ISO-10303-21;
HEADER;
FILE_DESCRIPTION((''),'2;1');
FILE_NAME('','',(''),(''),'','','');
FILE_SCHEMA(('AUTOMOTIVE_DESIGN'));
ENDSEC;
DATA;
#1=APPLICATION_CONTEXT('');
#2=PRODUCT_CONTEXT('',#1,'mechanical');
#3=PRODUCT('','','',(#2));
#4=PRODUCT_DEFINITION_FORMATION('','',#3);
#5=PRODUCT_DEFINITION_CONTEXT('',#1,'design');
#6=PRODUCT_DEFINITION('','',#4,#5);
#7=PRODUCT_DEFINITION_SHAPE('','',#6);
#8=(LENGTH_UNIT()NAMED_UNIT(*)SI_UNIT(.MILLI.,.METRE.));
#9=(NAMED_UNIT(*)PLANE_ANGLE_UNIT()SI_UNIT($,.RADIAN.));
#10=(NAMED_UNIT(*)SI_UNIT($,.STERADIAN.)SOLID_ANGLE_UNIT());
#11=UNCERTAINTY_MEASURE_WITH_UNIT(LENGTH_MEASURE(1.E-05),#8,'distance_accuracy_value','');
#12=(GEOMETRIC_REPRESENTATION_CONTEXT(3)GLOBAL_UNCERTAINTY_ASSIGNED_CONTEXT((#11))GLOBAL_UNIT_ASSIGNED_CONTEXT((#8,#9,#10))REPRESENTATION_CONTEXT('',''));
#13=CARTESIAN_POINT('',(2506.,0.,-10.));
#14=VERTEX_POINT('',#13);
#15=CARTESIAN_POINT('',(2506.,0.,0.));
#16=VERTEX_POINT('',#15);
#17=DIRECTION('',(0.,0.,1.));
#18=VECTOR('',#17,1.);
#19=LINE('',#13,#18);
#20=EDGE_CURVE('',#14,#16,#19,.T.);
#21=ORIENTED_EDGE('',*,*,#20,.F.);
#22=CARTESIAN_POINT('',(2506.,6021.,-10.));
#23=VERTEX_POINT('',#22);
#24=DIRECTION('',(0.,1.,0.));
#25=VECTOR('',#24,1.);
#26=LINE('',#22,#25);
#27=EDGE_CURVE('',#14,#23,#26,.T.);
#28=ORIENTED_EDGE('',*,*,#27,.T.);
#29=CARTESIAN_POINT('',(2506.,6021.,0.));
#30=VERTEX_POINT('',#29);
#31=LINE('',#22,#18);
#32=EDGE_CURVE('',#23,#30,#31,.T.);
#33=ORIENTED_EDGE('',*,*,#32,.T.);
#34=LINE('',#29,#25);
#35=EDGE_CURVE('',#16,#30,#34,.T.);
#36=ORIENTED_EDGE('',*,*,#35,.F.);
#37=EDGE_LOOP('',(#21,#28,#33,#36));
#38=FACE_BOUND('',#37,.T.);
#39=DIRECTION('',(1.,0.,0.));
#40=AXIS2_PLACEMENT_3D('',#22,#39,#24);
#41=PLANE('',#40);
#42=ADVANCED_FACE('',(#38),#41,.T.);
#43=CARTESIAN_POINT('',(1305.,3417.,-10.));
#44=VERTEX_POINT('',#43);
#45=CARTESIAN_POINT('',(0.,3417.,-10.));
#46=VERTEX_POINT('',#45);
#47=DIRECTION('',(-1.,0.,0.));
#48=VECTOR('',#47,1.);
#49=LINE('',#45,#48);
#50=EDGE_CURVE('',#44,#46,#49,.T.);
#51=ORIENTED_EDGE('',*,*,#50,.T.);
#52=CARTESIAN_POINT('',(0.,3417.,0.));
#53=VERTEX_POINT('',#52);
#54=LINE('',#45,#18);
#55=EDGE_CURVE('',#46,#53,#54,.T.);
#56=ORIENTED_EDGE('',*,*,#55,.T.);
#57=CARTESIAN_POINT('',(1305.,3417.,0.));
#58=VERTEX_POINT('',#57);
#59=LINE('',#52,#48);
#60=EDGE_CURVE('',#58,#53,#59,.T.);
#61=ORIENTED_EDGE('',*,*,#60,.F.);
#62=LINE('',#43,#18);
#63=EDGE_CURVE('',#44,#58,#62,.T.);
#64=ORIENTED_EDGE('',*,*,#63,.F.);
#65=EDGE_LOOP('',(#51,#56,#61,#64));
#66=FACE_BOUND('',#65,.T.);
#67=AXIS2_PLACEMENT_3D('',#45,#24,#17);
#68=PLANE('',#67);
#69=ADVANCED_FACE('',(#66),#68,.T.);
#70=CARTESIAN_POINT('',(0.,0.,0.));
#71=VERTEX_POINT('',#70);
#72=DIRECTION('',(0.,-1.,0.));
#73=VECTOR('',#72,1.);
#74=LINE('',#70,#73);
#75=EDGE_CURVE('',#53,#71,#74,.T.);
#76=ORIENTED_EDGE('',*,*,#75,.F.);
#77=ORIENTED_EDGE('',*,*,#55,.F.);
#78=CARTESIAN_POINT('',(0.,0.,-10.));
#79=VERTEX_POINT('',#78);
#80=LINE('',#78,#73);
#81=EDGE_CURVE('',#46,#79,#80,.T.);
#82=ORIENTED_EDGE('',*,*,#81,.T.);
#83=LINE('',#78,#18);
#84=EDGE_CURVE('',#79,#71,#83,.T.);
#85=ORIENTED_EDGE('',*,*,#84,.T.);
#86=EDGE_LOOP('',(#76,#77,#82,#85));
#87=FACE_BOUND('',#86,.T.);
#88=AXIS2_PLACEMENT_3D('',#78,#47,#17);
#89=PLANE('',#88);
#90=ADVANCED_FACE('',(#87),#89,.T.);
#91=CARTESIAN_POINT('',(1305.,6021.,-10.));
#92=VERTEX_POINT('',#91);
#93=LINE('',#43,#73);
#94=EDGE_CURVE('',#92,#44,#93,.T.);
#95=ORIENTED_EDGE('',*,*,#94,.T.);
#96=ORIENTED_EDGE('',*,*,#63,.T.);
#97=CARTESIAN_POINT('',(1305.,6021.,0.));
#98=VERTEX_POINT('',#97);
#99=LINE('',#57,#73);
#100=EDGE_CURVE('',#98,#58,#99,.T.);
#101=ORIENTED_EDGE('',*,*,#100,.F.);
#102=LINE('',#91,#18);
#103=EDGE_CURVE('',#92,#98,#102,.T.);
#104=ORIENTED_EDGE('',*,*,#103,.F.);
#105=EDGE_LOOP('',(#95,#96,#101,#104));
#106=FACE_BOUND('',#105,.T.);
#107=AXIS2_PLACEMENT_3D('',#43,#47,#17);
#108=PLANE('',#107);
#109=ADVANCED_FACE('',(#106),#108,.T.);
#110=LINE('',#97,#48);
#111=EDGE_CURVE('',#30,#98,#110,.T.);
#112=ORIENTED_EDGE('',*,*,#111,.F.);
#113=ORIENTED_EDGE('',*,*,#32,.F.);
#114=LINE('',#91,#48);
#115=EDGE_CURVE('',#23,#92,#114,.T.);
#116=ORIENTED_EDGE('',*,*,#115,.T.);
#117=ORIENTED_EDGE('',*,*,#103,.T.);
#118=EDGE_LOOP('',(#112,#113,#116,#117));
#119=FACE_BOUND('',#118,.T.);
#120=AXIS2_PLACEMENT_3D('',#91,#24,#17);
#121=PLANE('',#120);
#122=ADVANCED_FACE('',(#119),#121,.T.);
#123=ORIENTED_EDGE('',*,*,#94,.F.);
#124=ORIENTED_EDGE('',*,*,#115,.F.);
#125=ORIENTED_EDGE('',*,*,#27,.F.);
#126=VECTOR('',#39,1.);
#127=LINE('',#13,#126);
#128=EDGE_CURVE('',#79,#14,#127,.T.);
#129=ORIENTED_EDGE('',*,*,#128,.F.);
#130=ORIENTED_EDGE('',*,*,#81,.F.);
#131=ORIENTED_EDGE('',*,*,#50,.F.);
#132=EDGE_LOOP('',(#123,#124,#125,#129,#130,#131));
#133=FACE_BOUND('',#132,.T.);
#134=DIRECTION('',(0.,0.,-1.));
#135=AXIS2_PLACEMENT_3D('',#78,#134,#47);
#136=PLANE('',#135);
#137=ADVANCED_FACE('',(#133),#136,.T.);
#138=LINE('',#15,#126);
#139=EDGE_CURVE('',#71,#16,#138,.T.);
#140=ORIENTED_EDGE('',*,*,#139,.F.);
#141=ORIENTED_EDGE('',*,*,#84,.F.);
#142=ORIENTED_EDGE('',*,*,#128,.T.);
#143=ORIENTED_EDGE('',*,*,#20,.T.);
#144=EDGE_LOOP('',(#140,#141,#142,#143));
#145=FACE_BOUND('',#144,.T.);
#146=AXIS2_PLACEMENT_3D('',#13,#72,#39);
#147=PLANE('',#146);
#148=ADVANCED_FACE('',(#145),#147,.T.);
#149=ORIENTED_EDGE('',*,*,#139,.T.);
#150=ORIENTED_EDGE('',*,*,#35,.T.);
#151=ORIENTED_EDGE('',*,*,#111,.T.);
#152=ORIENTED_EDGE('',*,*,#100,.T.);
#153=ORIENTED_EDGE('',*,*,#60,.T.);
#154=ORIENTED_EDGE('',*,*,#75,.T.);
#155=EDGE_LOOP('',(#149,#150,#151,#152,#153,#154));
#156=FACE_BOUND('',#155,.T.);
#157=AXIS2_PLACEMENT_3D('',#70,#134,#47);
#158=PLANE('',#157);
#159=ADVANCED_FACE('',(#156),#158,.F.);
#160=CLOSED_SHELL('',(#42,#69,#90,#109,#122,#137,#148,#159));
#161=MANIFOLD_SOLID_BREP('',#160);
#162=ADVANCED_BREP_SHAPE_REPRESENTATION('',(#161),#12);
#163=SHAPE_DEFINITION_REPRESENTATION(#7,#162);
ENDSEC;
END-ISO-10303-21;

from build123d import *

# Parameters (mm, degrees)
TABAN_FLAN_1_DEPTH = 10


# Sheet-metal steps are written as plain solids
with BuildPart() as part:
    # Çizim1 → Taban-Flanş1 (new body)
    with BuildSketch(Plane.XY):
        Polygon((0, 0), (0, 3417), (1305, 3417), (1305, 6021), (2506, 6021), (2506, 0), align=None)
    extrude(amount=-TABAN_FLAN_1_DEPTH)


solid = part.part
